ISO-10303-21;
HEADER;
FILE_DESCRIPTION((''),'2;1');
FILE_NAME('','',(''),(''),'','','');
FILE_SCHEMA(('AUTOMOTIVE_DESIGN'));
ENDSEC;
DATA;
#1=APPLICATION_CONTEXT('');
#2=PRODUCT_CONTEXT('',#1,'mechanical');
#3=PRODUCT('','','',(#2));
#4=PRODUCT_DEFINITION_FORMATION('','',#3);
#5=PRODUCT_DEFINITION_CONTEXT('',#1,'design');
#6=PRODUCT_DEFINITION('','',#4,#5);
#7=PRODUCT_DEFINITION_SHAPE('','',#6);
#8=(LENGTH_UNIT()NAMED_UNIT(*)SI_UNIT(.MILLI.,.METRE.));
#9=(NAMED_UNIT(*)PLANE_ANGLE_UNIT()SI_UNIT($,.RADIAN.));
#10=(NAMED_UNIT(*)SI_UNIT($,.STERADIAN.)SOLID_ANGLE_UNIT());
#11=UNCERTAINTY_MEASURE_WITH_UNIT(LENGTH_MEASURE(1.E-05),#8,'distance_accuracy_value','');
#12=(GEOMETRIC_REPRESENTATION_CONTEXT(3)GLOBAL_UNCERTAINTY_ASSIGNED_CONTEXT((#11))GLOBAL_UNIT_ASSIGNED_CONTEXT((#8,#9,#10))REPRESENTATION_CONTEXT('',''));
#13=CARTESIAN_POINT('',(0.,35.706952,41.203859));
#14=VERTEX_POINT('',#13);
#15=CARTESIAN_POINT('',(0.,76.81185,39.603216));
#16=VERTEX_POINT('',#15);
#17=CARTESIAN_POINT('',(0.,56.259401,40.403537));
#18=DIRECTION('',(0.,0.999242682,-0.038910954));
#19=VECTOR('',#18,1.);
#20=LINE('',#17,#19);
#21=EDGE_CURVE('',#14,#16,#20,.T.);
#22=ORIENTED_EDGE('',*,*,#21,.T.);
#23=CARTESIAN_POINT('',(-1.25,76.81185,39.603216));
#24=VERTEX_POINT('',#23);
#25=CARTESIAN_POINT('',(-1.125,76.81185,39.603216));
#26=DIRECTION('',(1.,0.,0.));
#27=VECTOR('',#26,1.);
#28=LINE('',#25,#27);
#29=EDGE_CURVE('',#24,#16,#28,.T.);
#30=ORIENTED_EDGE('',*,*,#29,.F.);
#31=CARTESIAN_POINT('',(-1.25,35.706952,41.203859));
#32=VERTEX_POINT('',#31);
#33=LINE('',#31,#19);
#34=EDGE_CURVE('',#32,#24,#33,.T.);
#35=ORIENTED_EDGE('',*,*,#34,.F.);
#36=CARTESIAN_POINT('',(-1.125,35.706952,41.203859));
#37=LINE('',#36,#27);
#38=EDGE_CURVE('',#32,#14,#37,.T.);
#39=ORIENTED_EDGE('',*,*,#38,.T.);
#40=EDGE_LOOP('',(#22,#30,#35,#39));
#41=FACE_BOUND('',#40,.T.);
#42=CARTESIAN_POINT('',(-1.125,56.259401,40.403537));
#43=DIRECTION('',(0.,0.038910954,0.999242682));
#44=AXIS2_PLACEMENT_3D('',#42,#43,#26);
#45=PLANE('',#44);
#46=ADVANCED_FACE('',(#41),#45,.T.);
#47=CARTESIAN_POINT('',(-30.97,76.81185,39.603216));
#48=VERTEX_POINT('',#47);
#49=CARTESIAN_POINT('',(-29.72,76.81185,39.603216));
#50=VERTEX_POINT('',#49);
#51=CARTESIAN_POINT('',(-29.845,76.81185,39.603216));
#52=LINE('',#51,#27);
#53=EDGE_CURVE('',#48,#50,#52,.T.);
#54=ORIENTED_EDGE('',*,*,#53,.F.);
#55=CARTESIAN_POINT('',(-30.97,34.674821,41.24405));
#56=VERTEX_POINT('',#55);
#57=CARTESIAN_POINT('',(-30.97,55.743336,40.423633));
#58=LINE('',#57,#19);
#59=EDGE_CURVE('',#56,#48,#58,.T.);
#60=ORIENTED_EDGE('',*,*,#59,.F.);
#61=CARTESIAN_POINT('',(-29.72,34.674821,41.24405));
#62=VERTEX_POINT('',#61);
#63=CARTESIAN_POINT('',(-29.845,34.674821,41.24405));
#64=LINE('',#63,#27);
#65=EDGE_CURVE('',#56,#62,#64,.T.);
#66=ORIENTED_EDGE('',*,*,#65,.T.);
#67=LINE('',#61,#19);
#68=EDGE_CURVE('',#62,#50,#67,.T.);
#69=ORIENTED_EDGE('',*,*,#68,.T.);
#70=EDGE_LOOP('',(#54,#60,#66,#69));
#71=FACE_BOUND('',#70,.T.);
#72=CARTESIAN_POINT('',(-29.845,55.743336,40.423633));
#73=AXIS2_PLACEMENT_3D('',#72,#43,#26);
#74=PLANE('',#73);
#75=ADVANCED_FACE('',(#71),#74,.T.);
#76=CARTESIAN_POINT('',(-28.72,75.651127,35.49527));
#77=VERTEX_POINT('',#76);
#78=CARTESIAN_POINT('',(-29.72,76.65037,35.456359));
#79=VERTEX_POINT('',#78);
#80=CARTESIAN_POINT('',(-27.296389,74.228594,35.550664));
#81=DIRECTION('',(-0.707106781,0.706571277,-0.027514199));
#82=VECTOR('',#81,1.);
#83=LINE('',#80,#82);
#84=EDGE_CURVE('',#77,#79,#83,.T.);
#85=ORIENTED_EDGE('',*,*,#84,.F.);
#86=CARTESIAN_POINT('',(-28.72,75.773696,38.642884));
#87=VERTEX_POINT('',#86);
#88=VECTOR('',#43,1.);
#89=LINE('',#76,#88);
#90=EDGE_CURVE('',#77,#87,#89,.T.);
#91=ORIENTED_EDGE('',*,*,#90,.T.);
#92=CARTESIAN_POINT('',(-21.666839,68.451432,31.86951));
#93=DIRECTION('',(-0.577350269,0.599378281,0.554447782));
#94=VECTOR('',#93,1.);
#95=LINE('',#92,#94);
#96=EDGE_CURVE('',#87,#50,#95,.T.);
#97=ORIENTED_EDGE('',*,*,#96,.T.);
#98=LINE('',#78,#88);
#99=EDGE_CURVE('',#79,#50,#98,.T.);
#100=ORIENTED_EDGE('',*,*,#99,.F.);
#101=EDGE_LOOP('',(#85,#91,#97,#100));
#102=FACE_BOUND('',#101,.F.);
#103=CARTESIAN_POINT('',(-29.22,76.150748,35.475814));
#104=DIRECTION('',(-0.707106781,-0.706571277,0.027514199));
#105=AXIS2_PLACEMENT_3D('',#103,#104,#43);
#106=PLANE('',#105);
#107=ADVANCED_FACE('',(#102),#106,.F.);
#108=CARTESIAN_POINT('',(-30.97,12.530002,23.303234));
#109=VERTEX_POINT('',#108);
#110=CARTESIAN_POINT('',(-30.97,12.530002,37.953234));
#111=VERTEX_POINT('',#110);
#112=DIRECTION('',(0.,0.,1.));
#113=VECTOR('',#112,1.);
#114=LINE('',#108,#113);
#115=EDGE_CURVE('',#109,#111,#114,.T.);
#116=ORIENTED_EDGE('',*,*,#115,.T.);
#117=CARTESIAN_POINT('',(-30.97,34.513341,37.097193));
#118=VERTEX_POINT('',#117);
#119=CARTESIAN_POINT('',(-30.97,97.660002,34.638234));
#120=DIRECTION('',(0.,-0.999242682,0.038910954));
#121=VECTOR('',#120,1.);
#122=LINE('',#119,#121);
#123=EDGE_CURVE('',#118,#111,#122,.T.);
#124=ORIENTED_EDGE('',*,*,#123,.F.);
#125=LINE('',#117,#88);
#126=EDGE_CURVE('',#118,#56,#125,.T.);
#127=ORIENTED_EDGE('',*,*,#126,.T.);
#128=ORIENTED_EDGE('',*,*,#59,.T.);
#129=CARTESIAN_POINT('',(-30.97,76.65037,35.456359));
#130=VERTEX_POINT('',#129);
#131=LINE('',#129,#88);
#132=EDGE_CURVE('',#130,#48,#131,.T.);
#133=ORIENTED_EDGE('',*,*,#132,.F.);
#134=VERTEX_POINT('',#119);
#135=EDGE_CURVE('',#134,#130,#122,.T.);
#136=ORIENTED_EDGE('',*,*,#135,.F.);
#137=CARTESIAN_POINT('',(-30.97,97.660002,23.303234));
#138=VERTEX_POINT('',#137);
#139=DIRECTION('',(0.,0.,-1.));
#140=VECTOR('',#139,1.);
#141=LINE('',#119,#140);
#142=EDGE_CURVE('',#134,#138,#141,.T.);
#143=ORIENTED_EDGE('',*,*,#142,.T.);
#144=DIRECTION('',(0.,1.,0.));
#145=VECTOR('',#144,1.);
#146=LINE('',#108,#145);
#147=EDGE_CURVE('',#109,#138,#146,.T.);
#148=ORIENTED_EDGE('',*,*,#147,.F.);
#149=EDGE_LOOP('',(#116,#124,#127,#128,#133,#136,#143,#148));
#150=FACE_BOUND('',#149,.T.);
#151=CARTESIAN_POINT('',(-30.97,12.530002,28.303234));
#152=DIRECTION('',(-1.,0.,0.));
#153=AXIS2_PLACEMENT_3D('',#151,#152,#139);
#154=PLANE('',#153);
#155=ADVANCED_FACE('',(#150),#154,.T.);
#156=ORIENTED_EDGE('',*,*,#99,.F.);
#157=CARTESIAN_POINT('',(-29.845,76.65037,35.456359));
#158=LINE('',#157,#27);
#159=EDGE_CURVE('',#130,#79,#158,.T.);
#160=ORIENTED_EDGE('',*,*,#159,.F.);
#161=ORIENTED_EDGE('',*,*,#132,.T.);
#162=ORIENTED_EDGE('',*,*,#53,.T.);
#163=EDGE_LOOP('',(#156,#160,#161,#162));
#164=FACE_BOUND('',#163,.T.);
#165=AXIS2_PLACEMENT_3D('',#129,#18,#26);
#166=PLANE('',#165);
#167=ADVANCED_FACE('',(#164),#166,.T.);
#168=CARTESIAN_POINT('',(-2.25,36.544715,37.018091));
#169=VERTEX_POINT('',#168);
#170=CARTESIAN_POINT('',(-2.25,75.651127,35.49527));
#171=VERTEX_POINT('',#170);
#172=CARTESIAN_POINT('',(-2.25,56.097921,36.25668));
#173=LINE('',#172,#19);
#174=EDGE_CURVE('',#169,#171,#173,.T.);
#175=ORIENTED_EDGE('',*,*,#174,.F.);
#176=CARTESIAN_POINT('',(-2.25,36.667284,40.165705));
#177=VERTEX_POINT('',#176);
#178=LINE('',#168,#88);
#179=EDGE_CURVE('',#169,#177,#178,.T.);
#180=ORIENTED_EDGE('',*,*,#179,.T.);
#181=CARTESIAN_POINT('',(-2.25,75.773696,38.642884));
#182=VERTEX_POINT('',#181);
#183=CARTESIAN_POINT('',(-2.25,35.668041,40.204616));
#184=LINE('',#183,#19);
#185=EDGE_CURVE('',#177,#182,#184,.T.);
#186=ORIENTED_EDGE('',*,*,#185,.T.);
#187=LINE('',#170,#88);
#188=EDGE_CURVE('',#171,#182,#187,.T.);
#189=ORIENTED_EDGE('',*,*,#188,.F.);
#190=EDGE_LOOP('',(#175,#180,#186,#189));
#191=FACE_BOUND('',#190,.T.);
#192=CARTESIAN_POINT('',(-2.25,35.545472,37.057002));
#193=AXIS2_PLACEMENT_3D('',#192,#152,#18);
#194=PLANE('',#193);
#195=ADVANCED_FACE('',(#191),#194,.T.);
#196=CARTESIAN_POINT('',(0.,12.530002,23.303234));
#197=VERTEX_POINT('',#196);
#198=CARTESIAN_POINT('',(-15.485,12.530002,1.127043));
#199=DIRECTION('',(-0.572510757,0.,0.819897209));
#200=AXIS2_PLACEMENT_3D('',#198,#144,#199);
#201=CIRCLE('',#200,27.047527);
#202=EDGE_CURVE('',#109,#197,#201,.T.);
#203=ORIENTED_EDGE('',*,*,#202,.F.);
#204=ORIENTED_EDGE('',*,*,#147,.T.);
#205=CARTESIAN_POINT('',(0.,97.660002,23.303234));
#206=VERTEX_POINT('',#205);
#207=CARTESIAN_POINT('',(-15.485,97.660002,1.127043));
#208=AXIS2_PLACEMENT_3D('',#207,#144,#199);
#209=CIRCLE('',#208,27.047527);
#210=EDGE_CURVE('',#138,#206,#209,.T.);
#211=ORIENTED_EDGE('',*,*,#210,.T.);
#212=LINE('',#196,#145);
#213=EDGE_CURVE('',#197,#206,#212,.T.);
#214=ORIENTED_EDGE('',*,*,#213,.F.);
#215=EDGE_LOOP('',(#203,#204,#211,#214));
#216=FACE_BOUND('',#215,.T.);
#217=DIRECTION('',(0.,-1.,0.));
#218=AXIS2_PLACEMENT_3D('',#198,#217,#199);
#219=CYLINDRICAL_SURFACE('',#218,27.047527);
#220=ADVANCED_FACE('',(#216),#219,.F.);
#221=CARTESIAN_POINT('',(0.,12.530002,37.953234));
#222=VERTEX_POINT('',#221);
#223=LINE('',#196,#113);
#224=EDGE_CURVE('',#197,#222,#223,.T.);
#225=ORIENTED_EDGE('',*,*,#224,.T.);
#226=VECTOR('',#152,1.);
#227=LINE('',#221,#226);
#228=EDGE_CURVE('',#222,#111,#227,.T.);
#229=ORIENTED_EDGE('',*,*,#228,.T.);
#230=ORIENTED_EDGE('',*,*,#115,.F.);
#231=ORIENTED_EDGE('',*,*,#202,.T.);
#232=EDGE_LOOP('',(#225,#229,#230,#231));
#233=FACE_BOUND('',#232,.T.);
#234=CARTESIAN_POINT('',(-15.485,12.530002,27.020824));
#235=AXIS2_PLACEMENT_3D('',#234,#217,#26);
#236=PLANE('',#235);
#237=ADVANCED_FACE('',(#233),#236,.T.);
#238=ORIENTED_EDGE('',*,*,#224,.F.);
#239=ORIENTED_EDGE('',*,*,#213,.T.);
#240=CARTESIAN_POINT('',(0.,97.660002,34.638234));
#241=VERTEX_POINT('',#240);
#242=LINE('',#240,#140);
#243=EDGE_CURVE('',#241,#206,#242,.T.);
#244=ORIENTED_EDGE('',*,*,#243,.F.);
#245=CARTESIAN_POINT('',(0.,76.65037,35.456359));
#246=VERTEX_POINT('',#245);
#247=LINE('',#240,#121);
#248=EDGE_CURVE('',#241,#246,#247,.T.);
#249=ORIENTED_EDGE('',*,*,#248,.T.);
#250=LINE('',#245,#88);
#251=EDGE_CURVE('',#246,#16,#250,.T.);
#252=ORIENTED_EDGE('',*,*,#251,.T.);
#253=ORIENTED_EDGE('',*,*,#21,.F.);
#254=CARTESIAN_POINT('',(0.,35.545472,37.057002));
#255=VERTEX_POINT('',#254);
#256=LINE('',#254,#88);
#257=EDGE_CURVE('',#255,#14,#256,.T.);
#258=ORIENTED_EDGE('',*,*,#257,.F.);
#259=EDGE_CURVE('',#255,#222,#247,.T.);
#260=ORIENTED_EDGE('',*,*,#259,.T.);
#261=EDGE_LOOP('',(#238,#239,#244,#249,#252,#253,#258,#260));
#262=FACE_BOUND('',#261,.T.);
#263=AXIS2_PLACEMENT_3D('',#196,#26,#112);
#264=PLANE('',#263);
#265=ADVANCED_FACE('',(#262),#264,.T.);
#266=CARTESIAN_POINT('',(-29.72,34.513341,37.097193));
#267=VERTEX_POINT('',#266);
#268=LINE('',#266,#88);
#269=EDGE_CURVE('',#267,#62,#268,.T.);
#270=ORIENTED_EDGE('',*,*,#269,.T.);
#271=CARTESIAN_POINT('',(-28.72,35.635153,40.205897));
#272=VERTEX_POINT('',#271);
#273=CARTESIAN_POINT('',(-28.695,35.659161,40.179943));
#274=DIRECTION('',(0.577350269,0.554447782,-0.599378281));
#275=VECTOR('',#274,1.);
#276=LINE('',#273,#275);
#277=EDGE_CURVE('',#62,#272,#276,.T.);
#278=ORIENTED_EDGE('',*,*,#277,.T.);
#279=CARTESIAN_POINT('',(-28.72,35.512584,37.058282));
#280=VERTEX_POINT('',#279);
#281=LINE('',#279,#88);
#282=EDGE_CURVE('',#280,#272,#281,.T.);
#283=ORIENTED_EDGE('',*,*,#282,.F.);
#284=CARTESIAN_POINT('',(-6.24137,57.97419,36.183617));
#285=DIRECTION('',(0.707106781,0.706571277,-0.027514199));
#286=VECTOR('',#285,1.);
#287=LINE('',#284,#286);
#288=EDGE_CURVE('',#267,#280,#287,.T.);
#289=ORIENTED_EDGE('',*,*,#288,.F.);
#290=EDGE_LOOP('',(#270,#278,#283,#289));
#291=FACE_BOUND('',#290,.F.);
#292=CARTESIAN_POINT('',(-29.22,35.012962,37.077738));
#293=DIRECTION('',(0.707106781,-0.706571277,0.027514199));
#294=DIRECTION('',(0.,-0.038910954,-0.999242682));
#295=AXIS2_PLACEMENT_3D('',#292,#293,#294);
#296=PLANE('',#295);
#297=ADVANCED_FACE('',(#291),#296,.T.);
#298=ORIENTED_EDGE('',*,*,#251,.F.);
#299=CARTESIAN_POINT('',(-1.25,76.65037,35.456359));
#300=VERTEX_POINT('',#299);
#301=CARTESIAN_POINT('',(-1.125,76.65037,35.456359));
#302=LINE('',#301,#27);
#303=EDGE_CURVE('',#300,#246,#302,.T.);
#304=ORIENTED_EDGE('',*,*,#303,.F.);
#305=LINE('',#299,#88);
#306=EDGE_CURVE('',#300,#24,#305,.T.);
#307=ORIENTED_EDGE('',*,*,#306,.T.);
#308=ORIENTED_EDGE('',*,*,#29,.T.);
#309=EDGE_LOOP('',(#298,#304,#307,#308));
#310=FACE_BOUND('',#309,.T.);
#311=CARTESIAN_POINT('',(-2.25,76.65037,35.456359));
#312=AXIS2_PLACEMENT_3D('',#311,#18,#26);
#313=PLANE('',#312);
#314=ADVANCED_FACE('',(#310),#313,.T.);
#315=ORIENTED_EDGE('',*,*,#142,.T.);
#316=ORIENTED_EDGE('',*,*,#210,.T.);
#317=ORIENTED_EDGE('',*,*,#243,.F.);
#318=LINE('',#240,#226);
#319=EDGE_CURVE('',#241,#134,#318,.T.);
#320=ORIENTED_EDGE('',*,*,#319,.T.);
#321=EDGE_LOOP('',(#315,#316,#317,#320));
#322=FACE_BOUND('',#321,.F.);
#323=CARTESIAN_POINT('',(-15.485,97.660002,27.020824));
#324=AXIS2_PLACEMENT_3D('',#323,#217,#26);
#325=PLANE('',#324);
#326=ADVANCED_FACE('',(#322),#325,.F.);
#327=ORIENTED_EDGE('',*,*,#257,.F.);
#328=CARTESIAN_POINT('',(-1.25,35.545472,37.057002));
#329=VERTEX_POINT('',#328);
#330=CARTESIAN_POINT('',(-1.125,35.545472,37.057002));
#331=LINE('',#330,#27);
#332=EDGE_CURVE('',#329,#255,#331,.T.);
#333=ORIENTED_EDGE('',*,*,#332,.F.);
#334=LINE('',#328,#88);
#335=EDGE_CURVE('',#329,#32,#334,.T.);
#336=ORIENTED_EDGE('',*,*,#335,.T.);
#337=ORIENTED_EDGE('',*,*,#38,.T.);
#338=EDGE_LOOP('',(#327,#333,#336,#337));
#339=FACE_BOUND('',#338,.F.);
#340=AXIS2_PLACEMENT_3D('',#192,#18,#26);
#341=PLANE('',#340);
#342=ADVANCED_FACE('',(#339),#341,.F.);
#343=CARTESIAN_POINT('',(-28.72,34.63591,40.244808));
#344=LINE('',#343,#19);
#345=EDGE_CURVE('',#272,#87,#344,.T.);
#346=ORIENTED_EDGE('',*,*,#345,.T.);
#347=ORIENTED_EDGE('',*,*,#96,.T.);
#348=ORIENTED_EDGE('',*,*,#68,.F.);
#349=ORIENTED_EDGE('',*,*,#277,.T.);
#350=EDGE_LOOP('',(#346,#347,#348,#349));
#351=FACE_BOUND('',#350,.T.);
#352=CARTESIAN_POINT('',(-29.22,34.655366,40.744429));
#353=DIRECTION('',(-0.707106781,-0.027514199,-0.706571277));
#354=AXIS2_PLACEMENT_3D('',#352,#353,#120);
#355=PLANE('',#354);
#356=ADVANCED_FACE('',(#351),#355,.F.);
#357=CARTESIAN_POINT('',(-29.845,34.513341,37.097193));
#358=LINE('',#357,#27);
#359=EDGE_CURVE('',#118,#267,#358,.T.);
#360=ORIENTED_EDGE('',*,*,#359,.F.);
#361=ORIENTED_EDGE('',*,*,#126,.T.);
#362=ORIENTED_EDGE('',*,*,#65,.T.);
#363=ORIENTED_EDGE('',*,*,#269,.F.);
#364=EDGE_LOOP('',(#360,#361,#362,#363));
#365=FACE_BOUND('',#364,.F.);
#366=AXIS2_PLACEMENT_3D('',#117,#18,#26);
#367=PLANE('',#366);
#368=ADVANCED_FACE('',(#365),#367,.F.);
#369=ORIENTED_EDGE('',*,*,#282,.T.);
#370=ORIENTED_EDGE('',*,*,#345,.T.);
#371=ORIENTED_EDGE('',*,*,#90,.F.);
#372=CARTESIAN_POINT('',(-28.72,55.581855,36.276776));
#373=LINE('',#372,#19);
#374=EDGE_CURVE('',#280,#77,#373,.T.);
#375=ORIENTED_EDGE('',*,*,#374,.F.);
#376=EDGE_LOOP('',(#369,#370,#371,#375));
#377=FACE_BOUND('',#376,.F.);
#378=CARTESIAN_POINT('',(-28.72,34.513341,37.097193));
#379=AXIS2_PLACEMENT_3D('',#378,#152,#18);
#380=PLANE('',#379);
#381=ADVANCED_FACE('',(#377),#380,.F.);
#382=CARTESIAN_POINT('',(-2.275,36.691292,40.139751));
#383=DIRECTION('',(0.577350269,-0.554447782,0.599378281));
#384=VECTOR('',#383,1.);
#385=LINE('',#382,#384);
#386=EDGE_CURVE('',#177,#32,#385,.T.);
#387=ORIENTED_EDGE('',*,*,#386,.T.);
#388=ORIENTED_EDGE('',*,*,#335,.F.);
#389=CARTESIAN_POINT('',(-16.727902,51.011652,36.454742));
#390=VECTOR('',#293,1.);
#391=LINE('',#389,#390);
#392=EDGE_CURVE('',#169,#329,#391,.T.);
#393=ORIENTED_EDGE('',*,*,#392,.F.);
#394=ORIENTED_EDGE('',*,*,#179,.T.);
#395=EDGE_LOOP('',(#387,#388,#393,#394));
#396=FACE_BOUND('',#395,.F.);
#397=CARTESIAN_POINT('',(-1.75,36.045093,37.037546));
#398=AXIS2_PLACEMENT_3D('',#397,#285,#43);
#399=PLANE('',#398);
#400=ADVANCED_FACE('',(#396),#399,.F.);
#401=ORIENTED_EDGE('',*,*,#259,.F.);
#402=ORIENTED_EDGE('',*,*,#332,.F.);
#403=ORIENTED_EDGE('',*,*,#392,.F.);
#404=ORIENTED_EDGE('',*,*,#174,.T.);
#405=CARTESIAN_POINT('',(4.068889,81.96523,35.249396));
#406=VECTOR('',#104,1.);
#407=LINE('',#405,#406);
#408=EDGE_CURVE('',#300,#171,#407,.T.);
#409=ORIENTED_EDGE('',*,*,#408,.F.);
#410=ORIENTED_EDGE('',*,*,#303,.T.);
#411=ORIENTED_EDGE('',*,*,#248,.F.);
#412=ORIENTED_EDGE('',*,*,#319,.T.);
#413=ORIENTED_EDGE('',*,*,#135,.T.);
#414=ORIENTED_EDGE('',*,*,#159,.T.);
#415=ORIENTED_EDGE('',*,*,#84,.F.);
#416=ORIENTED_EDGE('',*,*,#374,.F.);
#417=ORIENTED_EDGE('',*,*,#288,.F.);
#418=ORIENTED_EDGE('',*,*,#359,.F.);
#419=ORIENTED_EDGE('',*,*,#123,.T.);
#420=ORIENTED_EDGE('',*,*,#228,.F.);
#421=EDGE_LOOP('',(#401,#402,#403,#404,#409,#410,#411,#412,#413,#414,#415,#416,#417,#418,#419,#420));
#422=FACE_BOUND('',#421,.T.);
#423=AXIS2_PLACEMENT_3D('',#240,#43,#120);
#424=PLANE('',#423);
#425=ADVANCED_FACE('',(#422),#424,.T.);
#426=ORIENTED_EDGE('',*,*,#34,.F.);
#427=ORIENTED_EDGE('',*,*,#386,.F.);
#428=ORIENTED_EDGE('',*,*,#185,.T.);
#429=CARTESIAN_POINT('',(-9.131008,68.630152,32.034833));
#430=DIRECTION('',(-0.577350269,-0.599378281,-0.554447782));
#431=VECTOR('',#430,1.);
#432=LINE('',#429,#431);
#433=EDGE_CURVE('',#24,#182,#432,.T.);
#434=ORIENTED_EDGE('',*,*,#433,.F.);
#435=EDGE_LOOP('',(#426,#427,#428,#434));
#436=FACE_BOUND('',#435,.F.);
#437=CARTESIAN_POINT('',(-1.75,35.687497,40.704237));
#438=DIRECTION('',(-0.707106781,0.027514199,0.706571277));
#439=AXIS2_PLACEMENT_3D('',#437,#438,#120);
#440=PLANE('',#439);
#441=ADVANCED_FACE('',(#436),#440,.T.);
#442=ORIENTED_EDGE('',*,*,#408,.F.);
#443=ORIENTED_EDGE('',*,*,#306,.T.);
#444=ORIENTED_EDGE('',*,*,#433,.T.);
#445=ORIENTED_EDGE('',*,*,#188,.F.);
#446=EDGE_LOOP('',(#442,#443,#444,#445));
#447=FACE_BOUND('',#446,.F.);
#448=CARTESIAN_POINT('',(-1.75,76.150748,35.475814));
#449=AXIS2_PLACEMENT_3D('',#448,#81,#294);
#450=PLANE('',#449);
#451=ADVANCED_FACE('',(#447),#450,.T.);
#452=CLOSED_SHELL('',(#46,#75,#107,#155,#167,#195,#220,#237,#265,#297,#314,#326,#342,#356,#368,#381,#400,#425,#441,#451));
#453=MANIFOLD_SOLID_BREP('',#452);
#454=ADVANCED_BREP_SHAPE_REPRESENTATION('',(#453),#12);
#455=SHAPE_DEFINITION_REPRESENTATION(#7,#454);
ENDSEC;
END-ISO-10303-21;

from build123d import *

# Parameters (mm, degrees)
F1_DEPTH = 30.97
F2_W     = 2.25
F2_H     = 41.1360506777
F2_H_2   = 42.1689638739
F3_DEPTH = 4.15
F4_SIZE  = 1
F5_SIZE  = 1
F7_DEPTH = 85.13


with BuildPart() as f1:
    # F0 (on Right) → F1 (new body)
    with BuildSketch(Plane.YZ):
        Polygon((97.6600019388, 28.3032343221), (97.6600019388, 34.6382343221), (12.5300019388, 37.9532343221), (12.5300019388, 28.3032343221), align=None)
    extrude(amount=-F1_DEPTH)

    # F2 (on face) → F3 (join)
    with BuildSketch(Plane(origin=(0, 1.4946493439, 38.3829558521), x_dir=(1, 0, 0), z_dir=(0, 0.0389109537, 0.9992426821))):
        with Locations((-1.125, 54.6446547341)):
            Rectangle(F2_W, F2_H)
        with Locations((-29.845, 54.128198136)):
            Rectangle(F2_W, F2_H_2)
    extrude(amount=F3_DEPTH)

    # F4
    f4_edges = [f1.edges().sort_by_distance(p)[0] for p in [
        (-28.72, 55.743336, 40.423633),
        (-2.25, 56.259401, 40.403537),
    ]]
    chamfer(f4_edges, length=F4_SIZE)

    # F5
    f5_edges = [f1.edges().sort_by_distance(p)[0] for p in [
        (-2.25, 76.711654, 37.030166),
        (-2.25, 35.606757, 38.630809),
        (-28.72, 34.574626, 38.671001),
        (-28.72, 76.711654, 37.030166),
    ]]
    chamfer(f5_edges, length=F5_SIZE)

    # F6 (on face) → F7 (join, through all)
    with BuildSketch(Plane.XZ.offset(-12.5300019388)):
        with BuildLine():
            Line((0, 28.3032343221), (-30.97, 28.3032343221))
            Line((-30.97, 28.3032343221), (-30.97, 23.3032343221))
            ThreePointArc((-30.97, 23.3032343221), (-15.485, 28.1745693779), (0, 23.3032343221))
            Line((0, 23.3032343221), (0, 28.3032343221))
        make_face()
    extrude(amount=-F7_DEPTH)


solid = f1.part
